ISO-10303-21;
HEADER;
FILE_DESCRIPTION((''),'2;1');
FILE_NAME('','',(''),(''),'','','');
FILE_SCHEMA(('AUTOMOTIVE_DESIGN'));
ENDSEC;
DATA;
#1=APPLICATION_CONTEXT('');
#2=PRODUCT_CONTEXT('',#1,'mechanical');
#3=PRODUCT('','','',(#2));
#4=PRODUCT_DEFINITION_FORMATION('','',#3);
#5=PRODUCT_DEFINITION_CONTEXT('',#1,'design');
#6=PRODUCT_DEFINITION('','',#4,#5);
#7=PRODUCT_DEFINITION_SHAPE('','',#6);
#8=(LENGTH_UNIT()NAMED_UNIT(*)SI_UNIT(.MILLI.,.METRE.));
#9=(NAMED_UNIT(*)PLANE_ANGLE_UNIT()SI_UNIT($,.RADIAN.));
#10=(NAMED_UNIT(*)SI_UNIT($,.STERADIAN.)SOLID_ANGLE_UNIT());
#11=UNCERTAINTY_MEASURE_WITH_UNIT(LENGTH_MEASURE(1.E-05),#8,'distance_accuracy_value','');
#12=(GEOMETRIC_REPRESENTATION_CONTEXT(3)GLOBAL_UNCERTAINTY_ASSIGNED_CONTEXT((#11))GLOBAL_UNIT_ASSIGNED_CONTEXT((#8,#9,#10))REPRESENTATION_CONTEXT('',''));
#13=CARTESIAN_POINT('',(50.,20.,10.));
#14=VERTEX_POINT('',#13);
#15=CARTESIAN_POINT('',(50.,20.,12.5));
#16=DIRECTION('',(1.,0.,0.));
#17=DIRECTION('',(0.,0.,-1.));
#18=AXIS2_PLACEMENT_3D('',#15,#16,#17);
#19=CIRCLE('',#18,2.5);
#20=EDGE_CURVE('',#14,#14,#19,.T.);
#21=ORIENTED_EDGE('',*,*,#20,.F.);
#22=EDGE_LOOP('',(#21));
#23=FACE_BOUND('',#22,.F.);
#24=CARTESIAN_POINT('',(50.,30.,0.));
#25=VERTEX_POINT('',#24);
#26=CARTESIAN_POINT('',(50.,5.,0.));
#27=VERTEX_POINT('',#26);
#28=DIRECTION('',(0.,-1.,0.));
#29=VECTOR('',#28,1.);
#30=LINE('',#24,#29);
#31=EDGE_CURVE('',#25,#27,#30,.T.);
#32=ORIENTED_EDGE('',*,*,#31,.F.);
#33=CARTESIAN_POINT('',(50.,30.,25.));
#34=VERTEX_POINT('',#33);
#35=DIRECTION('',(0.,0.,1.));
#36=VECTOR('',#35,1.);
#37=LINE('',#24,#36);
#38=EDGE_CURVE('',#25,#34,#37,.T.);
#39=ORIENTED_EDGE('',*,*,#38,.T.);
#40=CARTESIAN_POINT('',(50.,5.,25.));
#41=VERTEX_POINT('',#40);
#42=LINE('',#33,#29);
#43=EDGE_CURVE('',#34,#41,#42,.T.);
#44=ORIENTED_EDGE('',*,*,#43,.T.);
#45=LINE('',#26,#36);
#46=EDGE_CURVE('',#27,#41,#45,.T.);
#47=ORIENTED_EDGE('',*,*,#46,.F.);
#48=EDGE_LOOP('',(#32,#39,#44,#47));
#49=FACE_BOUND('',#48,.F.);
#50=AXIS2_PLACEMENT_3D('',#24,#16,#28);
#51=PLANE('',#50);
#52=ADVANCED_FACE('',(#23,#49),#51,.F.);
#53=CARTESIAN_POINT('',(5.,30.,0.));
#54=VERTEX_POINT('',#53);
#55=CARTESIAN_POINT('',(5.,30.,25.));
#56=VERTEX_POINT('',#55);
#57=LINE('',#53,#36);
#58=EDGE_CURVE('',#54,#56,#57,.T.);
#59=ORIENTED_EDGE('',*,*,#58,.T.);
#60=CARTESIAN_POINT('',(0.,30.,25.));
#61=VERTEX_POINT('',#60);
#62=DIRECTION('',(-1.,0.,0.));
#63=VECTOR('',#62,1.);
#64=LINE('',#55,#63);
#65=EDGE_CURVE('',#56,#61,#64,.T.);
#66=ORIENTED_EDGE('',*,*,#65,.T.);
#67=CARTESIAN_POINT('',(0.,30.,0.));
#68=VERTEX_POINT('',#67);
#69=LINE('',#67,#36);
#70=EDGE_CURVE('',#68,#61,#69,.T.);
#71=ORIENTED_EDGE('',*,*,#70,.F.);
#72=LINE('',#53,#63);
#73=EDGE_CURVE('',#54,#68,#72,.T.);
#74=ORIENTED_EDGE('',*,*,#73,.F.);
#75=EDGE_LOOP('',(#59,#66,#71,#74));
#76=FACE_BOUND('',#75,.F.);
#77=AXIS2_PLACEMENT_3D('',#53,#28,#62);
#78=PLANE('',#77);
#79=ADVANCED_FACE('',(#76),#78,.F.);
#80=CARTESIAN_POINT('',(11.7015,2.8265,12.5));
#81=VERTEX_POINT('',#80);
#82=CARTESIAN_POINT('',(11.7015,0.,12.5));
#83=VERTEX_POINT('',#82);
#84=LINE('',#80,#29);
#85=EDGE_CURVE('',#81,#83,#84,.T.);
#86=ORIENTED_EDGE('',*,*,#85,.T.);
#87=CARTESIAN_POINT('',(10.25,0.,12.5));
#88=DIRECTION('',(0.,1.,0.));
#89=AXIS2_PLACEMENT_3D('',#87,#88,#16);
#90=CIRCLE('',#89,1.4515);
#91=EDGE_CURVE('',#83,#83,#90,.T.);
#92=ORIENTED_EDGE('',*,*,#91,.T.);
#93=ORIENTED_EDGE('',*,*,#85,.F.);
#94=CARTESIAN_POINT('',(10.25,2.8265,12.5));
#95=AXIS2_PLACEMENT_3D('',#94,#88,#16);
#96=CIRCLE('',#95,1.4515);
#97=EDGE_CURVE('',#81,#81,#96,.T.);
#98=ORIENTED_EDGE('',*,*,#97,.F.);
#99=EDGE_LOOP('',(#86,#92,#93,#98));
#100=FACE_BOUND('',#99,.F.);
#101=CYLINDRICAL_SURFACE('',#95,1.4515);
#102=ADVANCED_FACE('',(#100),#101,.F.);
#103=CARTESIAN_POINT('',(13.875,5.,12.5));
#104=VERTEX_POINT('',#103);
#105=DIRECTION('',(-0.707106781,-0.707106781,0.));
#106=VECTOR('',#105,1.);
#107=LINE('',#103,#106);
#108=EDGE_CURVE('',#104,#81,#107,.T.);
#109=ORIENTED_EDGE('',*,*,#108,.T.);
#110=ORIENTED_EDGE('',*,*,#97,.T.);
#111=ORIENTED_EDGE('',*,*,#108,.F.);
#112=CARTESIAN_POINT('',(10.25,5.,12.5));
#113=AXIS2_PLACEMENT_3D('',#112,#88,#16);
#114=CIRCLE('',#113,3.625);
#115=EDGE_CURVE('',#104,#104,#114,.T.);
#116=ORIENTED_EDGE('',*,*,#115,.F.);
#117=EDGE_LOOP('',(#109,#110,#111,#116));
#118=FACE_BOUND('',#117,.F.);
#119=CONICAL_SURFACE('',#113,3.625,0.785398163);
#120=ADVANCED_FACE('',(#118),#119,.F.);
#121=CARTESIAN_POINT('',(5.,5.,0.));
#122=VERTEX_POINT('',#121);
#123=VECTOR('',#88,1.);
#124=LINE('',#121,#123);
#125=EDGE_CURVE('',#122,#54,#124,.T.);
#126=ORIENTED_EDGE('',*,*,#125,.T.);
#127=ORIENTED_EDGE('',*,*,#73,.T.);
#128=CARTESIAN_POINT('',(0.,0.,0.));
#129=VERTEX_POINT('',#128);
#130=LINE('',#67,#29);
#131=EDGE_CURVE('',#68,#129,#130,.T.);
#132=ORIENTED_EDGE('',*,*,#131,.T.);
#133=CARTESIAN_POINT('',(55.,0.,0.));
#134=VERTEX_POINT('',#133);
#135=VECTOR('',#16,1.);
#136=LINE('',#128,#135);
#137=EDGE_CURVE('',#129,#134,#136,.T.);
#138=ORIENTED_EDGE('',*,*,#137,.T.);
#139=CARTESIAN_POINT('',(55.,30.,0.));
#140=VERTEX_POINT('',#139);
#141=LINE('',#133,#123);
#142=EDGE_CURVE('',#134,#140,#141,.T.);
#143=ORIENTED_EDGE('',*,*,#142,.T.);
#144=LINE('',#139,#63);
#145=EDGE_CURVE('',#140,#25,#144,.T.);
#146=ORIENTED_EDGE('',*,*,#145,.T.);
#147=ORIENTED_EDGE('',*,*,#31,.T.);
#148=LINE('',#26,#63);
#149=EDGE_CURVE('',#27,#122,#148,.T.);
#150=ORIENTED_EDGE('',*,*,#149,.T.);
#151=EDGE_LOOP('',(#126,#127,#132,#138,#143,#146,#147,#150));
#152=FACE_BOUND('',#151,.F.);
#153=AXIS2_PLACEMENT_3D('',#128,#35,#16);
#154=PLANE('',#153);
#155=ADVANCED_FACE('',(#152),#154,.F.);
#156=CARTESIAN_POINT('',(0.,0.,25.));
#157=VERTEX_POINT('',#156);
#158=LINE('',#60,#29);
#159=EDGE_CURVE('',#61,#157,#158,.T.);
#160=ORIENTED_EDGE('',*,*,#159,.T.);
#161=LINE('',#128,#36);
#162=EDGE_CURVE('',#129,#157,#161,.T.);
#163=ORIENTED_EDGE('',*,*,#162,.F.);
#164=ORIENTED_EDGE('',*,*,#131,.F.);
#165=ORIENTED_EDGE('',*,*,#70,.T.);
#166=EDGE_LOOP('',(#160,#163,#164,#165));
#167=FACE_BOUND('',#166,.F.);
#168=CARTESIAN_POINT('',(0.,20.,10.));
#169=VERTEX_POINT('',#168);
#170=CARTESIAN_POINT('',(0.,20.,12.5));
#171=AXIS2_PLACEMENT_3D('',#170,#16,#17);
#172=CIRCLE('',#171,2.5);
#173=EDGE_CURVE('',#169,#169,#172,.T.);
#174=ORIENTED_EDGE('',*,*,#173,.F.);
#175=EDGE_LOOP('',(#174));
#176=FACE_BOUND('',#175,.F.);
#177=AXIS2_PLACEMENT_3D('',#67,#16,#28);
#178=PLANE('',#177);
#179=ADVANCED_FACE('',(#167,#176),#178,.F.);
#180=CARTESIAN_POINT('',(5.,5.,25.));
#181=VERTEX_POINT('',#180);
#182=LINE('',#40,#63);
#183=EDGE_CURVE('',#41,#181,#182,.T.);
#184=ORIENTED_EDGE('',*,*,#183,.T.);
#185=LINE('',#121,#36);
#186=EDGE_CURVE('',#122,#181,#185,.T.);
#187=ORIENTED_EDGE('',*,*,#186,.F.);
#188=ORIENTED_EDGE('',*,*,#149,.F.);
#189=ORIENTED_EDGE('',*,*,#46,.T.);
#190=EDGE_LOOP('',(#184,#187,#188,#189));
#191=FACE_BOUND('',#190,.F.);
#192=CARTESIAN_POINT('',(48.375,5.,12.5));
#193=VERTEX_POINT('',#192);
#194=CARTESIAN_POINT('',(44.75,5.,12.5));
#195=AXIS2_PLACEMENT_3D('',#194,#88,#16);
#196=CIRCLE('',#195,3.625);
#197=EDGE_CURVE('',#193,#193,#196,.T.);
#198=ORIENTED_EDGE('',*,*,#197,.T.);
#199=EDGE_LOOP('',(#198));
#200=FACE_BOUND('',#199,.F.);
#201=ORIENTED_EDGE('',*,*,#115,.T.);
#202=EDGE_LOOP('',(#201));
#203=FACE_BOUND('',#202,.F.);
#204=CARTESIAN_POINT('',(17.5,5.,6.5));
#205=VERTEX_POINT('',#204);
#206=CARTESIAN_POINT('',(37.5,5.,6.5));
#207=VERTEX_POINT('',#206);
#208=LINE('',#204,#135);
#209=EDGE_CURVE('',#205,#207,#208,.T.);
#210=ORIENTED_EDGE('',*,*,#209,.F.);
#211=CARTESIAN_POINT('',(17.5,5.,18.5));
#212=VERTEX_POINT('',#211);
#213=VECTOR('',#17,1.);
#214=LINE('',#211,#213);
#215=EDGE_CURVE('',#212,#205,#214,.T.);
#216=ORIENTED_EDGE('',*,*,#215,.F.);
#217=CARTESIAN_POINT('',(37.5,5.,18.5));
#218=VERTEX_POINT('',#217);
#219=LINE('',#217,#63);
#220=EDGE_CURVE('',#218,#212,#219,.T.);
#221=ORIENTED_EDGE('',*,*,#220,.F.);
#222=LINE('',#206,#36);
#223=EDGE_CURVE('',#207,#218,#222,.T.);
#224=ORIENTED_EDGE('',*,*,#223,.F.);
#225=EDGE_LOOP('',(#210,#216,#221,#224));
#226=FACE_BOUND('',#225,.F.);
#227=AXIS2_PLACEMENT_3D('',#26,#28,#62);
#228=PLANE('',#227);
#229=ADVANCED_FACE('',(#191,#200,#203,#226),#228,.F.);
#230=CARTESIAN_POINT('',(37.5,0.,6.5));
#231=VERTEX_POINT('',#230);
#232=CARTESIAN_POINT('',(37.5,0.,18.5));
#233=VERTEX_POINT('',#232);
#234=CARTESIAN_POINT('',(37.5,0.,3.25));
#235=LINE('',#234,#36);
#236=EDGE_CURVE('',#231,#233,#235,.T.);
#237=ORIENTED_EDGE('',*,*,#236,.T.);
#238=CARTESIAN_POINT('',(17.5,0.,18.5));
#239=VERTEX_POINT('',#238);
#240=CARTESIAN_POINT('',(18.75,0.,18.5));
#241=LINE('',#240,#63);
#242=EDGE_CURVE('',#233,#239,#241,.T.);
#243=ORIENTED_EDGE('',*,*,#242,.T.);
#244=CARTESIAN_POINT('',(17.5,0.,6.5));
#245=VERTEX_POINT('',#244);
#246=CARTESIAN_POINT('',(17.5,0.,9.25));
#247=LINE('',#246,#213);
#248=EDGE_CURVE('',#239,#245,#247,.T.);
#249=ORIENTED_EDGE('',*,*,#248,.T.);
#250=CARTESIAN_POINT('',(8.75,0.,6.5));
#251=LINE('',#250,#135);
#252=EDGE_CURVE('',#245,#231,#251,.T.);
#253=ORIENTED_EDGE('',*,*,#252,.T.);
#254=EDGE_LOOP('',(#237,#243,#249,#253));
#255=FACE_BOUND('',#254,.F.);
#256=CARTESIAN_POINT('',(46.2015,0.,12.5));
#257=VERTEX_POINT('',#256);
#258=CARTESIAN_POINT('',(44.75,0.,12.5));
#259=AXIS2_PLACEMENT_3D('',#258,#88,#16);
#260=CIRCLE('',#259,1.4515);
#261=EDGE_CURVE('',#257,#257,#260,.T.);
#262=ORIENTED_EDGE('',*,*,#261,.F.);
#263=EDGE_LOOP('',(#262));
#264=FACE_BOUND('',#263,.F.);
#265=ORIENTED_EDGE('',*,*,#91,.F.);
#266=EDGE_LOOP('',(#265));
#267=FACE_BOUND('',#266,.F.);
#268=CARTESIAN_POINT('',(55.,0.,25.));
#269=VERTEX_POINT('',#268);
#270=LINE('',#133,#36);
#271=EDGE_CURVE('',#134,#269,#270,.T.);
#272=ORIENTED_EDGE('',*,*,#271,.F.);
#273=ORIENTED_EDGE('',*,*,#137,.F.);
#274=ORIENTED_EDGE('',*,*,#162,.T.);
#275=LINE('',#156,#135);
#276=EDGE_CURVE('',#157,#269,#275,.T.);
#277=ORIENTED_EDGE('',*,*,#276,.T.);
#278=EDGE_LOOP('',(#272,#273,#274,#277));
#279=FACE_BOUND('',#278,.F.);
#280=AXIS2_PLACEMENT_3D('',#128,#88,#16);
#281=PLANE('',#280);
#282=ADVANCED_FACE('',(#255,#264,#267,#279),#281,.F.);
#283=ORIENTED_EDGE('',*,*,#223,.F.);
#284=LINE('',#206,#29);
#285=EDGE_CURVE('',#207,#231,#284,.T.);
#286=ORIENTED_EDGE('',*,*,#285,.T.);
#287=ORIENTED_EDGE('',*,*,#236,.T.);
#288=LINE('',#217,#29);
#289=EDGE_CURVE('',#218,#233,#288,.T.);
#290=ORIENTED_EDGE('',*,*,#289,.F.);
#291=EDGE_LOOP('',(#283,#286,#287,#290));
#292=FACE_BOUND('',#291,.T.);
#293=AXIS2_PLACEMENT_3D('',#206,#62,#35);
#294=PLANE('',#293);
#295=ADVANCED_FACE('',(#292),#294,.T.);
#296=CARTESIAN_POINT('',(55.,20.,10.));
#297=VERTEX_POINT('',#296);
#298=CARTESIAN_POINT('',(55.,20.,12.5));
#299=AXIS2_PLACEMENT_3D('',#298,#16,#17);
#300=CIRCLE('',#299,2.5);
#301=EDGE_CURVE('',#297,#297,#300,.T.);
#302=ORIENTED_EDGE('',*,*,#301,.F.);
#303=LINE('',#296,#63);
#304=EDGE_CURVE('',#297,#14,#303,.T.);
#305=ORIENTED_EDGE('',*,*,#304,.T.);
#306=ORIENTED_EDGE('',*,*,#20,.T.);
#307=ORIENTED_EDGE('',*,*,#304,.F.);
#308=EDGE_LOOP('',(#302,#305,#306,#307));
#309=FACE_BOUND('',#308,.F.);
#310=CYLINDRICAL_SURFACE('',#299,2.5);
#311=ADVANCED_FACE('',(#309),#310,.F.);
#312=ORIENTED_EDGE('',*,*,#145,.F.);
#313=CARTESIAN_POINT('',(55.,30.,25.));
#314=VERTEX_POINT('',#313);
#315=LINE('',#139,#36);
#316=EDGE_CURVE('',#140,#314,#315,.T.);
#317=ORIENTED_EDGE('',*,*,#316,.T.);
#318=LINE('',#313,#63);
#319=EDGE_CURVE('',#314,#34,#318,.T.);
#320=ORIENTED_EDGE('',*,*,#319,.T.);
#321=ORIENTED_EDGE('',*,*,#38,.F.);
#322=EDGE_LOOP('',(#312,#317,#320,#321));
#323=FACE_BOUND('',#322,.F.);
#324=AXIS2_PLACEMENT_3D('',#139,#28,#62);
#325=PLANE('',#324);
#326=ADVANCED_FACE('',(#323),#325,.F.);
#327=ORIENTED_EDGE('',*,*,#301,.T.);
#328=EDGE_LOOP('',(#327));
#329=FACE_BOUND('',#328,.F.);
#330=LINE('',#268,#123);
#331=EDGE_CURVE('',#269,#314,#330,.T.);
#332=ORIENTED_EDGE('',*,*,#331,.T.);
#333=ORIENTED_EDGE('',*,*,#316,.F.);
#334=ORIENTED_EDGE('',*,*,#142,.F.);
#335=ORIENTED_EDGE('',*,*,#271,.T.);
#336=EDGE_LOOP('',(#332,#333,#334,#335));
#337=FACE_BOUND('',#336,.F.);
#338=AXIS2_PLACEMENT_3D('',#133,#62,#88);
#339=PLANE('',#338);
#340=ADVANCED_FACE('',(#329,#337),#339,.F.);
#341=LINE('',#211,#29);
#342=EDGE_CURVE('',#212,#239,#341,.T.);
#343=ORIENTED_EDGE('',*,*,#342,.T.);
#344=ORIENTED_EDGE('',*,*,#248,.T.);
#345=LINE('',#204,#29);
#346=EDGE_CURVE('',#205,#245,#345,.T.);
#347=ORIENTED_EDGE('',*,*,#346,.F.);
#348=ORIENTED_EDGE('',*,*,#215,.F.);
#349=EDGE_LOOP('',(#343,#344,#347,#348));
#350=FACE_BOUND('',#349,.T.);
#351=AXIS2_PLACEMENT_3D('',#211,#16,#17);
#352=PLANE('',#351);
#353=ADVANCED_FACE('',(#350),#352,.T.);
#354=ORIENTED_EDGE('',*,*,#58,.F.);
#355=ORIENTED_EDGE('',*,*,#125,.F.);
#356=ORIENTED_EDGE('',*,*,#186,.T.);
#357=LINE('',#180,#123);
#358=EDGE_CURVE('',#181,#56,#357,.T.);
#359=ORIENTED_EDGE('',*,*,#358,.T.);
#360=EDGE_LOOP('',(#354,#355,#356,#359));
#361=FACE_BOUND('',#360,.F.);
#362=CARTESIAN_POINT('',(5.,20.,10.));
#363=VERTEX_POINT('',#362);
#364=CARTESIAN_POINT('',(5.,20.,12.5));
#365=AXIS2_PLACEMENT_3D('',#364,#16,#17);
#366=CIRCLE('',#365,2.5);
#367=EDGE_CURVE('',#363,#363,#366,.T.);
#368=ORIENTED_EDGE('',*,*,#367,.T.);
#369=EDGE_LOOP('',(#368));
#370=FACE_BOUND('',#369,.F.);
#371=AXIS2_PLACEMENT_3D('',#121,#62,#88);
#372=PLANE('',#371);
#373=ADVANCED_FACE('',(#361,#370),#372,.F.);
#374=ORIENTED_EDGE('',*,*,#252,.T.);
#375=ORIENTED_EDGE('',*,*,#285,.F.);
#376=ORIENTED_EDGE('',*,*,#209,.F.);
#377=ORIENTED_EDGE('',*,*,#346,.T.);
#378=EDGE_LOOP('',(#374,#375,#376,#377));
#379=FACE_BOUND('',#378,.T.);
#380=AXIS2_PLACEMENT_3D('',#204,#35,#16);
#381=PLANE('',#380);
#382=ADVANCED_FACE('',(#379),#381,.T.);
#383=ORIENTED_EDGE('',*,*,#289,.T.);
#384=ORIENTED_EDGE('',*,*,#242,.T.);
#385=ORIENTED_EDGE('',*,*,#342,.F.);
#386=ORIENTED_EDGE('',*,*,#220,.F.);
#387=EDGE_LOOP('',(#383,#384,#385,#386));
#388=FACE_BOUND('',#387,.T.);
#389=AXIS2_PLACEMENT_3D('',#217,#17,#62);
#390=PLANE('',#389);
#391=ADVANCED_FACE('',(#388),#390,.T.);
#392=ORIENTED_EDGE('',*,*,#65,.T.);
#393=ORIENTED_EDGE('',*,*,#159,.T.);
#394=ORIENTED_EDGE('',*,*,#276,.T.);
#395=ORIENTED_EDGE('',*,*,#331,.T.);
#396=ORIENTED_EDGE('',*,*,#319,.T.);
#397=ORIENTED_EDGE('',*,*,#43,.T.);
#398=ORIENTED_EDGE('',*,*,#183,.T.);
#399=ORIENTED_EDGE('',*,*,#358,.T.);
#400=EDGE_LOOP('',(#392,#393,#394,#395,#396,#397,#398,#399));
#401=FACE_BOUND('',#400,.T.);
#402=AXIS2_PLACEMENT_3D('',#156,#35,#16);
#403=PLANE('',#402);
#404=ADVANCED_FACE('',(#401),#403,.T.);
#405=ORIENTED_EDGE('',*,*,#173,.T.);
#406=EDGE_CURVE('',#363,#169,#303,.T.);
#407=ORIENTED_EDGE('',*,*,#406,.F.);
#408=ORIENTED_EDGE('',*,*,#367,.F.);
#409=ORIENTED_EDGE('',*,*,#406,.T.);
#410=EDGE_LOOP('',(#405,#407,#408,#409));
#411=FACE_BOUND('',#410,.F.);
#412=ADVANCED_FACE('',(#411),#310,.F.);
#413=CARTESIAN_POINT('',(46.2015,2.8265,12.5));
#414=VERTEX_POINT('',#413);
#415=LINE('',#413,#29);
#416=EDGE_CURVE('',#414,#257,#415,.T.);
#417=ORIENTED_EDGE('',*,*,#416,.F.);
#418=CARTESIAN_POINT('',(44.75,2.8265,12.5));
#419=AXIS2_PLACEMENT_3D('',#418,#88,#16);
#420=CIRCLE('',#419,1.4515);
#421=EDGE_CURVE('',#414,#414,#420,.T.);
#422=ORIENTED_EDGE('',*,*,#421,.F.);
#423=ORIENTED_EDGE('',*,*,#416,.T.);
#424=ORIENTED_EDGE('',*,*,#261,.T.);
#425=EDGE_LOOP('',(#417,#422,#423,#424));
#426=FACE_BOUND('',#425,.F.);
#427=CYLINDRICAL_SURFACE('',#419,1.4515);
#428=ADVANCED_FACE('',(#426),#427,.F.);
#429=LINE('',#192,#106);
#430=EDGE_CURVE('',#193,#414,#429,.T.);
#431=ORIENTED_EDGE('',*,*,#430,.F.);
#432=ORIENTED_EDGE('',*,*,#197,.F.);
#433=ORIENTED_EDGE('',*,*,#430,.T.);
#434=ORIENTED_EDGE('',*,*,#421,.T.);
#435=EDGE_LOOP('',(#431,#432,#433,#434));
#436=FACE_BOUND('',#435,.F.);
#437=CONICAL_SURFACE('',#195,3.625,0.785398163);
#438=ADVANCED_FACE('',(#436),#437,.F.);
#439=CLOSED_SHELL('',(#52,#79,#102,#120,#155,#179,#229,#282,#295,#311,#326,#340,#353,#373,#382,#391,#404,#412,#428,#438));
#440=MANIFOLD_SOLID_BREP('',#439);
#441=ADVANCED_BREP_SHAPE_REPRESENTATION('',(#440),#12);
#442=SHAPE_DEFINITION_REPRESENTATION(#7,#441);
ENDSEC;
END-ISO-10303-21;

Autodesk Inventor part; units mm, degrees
ref_plane "YZ Plane" through (0, 0, 0) normal (1, 0, 0) x (0, 1, 0)
ref_plane "XZ Plane" through (0, 0, 0) normal (0, 1, 0) x (-1, 0, 0)
ref_plane "XY Plane" through (0, 0, 0) normal (0, 0, 1) x (1, 0, 0)
sketch "Sketch1" plane through (0, 0, 0) normal (0, 0, 1) x (1, 0, 0)
  line L0 (0, 0) -> (55, 0)
  line L1 (55, 0) -> (55, 30)
  line L2 (55, 30) -> (50, 30)
  line L3 (50, 30) -> (50, 5)
  line L4 (50, 5) -> (5, 5)
  line L5 (5, 5) -> (5, 30)
  line L6 (5, 30) -> (0, 30)
  line L7 (0, 30) -> (0, 0)
  dimension "d0" = 55
  dimension "d1" = 30
  dimension "d2" = 5
  dimension "d3" = 25
  dimension "d4" = 45
  dimension "d5" = 25
  dimension "d6" = 5
extrude "Extrusion1" add sketch "Sketch1" along normal blind 25
sketch "Sketch2" plane through (55, 0, 0) normal (1, 0, 0) x (0, 0, -1)
  circle A0 centre (-12.5, 20) radius 2.5
  line L0 (0, 30) -> (-25, 30) projected
  line L1 (0, 0) -> (0, 30) projected
  dimension "d9" = 5
  dimension "d10" = 10
  dimension "d11" = 12.5
extrude "Extrusion2" cut sketch "Sketch2" against normal through all
sketch "Sketch3" plane through (5, 5, 0) normal (0, 1, 0) x (1, 0, 0)
  line L0 (12.5, -6.5) -> (32.5, -6.5)
  line L1 (32.5, -6.5) -> (32.5, -18.5)
  line L2 (32.5, -18.5) -> (12.5, -18.5)
  line L3 (12.5, -18.5) -> (12.5, -6.5)
  line L4 (12.5, -6.5) -> (32.5, -18.5) construction
  line L5 (32.5, -6.5) -> (12.5, -18.5) construction
  line L6 (45, 0) -> (0, 0) projected
  line L7 (0, 0) -> (0, -25) projected
  point P0 (-5, 0)
  point P1 (22.5, -12.5)
  dimension "d14" = 20
  dimension "d15" = 12
  dimension "d16" = 12.5
  dimension "d17" = 22.5
extrude "Extrusion3" cut sketch "Sketch3" against normal through all
sketch "Sketch4" plane through (5, 5, 0) normal (0, 1, 0) x (1, 0, 0)
  circle A0 centre (5.25, -12.5) radius 3.625
  circle A1 centre (39.75, -12.5) radius 3.625
  line L0 (0, -10) -> (0, -15) projected
  line L1 (45, 0) -> (45, -25) projected
  line L2 (45, -25) -> (0, -25) projected
  point P0 (-5, 0)
  dimension "d20" = 7.25
  dimension "d21" = 7.25
  dimension "d22" = 5.25
  dimension "d23" = 5.25
  dimension "d24" = 12.5
  dimension "d25" = 12.5
extrude "Extrusion4" cut sketch "Sketch4" against normal blind 2.1735 draft -45
sketch "Sketch5" plane through (10.25, 2.8265, 12.5) normal (0, 1, 0) x (1, 0, 0)
  circle A0 centre (0, 0) radius 1.4515
  circle A1 centre (34.5, 0) radius 1.4515
  line L0 (39.75, 12.5) -> (39.75, -12.5) projected
  point P0 (-10.25, 12.5)
  dimension "d28" = 2.903
  dimension "d29" = 2.903
  dimension "d30" = 5.25
extrude "Extrusion5" cut sketch "Sketch5" against normal through all
properties part number "2nd to 3rd arm linking clamp"
